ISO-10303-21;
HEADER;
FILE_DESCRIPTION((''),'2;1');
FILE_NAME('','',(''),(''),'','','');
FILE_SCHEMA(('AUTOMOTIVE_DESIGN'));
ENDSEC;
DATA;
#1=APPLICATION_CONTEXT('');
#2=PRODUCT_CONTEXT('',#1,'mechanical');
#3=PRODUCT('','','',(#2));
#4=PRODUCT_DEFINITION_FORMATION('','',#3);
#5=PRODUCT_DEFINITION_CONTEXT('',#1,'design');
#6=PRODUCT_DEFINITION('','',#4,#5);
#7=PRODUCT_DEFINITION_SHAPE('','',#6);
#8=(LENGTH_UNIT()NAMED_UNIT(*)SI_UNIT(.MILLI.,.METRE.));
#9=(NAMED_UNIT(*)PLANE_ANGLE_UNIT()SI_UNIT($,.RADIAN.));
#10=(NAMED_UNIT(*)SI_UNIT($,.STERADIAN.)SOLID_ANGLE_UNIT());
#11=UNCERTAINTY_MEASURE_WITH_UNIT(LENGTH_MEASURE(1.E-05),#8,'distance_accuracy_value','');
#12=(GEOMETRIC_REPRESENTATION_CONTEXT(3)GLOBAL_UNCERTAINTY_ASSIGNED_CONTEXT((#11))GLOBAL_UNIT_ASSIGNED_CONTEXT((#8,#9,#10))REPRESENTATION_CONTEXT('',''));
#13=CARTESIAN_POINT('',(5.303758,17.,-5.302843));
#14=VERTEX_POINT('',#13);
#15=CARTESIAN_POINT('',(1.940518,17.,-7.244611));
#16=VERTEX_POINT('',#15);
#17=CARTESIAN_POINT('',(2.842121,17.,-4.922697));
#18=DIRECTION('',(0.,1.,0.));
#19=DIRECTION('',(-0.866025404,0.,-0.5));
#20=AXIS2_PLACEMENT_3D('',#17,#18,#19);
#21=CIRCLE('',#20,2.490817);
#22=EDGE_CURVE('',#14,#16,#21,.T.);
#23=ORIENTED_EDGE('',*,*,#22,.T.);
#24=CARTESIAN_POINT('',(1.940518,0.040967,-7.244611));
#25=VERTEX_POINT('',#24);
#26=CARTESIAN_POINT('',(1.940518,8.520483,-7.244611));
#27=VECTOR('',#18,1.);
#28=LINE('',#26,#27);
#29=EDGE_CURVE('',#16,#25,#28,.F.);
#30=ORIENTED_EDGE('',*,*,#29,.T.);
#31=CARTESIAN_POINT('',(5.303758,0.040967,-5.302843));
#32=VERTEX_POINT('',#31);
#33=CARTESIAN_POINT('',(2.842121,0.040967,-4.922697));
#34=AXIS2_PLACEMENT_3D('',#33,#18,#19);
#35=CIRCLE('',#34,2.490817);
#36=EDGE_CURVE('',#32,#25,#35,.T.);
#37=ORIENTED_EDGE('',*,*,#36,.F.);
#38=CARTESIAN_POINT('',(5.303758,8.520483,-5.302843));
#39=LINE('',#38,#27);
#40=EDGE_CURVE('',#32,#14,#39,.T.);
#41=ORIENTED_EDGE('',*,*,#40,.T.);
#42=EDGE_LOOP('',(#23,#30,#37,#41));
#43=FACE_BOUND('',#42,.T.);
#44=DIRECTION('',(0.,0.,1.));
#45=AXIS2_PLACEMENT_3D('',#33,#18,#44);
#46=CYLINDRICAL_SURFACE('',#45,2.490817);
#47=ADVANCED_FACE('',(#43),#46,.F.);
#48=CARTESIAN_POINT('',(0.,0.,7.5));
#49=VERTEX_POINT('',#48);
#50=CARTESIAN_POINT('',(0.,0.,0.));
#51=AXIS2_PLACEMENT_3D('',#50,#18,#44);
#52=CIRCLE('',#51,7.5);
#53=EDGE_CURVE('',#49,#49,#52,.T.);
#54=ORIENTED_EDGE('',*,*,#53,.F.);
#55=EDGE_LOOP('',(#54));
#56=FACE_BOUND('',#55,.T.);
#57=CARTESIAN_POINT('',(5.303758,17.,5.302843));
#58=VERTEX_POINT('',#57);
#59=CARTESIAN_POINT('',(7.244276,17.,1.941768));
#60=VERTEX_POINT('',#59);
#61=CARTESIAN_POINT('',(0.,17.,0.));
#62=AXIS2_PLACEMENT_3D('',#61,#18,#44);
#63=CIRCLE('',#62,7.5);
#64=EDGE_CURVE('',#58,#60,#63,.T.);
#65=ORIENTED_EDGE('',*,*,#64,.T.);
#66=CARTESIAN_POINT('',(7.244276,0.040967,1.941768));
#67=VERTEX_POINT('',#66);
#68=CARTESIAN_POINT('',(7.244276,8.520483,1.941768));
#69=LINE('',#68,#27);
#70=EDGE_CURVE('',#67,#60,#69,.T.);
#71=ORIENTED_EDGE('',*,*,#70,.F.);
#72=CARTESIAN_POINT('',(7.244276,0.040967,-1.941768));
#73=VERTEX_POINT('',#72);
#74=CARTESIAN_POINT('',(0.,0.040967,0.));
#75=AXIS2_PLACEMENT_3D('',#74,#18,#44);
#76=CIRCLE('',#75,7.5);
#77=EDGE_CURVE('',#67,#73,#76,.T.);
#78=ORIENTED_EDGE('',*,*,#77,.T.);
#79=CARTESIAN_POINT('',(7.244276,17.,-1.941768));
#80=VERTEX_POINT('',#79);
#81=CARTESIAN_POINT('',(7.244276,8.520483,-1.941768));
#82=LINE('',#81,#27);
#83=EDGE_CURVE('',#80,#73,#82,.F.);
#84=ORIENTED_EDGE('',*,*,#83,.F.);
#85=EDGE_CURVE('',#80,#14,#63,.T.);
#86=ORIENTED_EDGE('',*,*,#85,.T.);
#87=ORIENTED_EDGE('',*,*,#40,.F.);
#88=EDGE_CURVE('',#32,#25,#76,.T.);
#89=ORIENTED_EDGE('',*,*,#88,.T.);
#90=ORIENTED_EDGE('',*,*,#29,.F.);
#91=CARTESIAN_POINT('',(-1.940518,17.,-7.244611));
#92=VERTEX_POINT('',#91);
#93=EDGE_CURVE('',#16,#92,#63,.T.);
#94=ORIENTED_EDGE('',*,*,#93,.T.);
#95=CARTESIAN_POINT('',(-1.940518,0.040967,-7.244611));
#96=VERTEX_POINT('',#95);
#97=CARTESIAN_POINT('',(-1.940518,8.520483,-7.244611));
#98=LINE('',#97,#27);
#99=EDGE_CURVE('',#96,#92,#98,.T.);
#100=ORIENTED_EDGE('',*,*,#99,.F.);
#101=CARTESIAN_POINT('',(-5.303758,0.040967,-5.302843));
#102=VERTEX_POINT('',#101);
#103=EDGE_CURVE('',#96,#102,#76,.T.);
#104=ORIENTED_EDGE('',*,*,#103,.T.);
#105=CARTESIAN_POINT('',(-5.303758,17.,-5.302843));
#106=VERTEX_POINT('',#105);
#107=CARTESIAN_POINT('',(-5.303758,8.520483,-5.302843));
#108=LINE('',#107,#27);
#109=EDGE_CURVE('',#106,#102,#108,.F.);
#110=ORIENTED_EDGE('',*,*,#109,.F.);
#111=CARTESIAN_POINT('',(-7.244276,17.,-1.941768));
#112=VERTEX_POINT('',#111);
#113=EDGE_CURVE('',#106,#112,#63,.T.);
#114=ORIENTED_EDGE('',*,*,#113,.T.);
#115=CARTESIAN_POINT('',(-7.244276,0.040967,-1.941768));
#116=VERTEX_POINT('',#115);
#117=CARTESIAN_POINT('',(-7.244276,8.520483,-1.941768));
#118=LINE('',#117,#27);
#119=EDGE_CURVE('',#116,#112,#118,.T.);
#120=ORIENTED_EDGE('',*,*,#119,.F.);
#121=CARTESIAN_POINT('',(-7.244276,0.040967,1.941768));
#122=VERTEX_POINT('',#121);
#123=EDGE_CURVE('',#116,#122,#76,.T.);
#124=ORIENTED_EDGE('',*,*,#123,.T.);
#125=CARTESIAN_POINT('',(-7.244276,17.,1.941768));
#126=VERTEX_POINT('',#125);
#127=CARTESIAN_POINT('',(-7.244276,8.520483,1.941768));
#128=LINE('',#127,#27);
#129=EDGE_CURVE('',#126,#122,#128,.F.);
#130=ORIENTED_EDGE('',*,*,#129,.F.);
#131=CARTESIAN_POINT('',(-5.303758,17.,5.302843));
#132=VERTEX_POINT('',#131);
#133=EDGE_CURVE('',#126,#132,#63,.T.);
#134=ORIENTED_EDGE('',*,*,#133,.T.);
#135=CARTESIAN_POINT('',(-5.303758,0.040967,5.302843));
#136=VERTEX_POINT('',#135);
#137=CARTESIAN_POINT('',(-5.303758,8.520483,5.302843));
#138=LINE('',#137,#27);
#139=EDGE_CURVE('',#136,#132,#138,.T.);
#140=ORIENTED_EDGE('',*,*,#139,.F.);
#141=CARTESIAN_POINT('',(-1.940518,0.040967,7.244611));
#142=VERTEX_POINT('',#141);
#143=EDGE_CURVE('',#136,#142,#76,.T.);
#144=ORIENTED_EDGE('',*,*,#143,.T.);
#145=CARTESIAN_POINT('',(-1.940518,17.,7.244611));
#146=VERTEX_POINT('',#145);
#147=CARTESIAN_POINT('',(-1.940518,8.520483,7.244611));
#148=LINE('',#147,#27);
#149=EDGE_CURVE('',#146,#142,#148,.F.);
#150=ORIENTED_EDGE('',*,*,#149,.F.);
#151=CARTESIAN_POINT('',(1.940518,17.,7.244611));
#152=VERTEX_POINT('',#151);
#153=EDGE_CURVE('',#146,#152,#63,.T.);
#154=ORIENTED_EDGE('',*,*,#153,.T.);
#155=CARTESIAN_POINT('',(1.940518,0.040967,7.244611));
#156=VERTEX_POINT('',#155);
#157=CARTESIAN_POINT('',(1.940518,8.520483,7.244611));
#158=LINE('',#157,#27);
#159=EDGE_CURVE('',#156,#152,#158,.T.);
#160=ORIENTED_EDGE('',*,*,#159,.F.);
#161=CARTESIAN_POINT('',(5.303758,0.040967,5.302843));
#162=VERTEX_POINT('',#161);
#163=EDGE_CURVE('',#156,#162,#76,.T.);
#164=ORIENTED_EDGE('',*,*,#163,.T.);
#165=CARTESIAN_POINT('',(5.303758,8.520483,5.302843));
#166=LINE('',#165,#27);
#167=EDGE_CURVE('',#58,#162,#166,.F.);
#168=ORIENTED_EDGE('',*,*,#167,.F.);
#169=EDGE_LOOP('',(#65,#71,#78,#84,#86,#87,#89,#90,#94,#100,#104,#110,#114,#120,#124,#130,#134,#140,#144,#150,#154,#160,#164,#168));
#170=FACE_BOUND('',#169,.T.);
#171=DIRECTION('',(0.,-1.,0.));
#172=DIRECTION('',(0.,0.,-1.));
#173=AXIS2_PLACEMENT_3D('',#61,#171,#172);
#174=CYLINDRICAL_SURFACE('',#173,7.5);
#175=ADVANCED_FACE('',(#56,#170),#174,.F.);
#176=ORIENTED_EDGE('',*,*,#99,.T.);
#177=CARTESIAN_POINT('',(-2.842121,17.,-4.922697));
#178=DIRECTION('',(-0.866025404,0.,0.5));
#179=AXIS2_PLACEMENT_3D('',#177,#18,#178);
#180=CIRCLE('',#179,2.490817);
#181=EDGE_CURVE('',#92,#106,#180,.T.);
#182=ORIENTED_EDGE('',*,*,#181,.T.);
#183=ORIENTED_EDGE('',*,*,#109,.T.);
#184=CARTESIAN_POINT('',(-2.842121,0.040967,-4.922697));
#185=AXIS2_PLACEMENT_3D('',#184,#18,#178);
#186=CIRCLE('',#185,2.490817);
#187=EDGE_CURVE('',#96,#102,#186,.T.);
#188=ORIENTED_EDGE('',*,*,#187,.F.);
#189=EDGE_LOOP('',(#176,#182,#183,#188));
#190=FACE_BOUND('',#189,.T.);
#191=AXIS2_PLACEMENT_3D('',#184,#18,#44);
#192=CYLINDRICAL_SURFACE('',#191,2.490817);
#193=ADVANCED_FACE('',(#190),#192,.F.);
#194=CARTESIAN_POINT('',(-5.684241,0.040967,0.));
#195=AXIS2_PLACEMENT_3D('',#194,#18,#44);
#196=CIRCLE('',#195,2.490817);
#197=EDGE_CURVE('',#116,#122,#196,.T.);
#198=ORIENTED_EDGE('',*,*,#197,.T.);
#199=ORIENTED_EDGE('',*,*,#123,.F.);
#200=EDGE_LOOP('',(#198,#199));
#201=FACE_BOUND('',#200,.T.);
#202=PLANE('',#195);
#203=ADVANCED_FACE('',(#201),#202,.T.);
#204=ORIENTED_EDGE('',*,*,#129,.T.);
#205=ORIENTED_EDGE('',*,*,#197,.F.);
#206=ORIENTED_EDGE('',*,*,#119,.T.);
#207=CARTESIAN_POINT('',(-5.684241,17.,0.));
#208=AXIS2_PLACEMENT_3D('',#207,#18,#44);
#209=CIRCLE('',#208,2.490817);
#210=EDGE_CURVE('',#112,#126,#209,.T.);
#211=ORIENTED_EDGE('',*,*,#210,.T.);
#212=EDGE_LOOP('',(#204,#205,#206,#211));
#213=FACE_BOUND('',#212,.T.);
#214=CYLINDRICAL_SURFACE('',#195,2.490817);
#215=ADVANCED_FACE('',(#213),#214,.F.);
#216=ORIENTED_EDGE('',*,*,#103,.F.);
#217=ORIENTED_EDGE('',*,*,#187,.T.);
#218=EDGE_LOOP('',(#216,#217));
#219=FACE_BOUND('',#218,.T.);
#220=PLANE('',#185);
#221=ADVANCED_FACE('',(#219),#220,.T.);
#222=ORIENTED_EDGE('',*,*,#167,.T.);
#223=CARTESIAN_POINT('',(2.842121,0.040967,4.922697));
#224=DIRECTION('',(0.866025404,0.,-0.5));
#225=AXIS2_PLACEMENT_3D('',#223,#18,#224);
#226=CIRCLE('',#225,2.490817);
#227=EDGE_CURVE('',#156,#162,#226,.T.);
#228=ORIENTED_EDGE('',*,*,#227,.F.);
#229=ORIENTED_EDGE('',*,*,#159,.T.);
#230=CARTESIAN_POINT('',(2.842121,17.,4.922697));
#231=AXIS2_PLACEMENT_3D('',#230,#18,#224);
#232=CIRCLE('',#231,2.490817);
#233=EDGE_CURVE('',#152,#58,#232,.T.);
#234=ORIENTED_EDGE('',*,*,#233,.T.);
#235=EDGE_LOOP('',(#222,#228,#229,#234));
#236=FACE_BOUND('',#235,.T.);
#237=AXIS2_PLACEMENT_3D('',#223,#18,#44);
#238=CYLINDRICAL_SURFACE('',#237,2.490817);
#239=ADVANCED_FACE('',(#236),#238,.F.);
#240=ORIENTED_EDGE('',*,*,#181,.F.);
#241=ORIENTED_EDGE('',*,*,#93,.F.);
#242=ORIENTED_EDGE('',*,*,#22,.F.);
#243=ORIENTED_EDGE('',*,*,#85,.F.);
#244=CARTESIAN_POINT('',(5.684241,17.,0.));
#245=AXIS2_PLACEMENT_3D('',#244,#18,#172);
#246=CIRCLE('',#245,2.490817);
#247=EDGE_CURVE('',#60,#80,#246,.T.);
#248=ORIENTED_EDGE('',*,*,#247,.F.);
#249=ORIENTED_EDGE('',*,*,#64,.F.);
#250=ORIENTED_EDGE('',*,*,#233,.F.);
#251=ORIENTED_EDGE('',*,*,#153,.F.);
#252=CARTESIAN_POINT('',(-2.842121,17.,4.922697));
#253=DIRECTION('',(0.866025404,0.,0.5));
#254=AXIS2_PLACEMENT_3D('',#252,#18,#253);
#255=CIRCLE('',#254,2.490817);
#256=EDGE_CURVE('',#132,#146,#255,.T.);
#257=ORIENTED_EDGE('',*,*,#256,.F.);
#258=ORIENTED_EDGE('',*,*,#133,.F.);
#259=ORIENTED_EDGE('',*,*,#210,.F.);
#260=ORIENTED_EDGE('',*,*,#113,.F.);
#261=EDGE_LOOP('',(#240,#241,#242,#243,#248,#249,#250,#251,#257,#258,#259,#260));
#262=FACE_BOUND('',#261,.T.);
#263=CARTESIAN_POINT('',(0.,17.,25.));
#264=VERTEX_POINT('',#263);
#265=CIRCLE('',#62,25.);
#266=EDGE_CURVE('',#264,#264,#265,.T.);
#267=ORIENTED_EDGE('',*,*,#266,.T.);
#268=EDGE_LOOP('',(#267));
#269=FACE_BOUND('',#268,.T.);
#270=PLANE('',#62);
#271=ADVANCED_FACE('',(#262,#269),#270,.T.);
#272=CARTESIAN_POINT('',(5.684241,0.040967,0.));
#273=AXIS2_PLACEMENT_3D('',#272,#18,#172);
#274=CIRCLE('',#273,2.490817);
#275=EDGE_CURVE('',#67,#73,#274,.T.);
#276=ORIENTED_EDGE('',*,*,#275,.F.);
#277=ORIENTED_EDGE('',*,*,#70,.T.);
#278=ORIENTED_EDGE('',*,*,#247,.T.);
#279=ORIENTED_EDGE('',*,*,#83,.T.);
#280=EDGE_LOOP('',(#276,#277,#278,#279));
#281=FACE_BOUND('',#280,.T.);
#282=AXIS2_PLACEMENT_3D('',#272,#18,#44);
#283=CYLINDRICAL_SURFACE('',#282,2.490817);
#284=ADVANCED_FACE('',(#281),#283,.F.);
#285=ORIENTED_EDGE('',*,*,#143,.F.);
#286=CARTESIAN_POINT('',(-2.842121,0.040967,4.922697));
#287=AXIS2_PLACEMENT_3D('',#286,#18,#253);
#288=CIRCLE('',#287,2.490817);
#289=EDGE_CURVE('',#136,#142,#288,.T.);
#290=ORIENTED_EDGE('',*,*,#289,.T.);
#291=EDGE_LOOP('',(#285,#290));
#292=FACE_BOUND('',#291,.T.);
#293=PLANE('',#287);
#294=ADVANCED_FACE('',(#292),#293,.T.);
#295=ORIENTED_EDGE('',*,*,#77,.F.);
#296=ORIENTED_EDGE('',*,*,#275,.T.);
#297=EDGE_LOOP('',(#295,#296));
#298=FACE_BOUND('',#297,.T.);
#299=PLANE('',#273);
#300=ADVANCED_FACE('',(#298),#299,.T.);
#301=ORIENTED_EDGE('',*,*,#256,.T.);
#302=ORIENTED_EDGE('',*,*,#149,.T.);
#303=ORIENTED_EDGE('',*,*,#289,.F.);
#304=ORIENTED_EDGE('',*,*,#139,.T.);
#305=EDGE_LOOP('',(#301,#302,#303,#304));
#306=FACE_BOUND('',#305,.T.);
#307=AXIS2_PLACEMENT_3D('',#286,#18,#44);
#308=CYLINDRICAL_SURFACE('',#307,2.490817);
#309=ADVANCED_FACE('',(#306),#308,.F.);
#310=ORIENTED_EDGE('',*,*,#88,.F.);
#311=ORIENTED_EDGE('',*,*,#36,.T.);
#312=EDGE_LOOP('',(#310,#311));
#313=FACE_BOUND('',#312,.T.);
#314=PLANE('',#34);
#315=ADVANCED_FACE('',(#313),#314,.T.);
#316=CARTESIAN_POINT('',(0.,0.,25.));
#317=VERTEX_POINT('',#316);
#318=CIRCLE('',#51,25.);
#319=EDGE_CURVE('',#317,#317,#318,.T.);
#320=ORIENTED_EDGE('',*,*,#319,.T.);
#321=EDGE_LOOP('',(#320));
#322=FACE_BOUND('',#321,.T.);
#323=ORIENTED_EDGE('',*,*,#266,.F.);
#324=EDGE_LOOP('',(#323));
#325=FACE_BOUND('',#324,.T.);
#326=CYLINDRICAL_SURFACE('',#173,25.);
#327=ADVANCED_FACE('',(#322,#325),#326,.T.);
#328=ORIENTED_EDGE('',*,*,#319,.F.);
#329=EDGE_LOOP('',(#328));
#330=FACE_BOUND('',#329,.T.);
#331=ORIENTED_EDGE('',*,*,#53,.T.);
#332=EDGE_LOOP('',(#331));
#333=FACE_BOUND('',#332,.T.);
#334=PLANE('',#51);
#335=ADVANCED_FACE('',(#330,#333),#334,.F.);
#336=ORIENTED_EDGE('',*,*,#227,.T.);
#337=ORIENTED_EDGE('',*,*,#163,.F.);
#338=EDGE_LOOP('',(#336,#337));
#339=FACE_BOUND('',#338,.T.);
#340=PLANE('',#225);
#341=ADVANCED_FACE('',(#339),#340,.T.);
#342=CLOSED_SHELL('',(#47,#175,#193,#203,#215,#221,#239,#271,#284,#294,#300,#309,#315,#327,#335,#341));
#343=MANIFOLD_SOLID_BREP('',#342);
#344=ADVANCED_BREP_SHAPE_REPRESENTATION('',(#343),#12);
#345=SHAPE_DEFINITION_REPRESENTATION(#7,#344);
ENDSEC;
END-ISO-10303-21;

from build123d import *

# Parameters (mm, degrees)
SKETCH1_R           = 25
BOSS_EXTRUDE1_DEPTH = 17
SKETCH2_R           = 7.5
CUT_EXTRUDE1_DEPTH  = 40.230090492
SKETCH3_R           = 2.490817459
CUT_EXTRUDE2_DEPTH  = 16.959033499
CIRPATTERN1_COUNT   = 6


with BuildPart() as part:
    # Sketch1 → Boss-Extrude1 (new body)
    with BuildSketch(Plane(origin=(0, 0, 0), x_dir=(1, 0, 0), z_dir=(0, 1, 0))):
        Circle(SKETCH1_R)
    extrude(amount=BOSS_EXTRUDE1_DEPTH)

    # Sketch2 → Cut-Extrude1 (cut, through all)
    with BuildSketch(Plane(origin=(0, 0, 0), x_dir=(1, 0, 0), z_dir=(0, 1, 0))):
        Circle(SKETCH2_R)
    extrude(amount=CUT_EXTRUDE1_DEPTH, mode=Mode.SUBTRACT)

    # Sketch3 → Cut-Extrude2 (cut)
    with BuildSketch(Plane(origin=(0, 17, 0), x_dir=(1, 0, 0), z_dir=(0, 1, 0))):
        with Locations((-5.684241055, 0)):
            Circle(SKETCH3_R)
    cut_extrude2 = extrude(amount=-CUT_EXTRUDE2_DEPTH, mode=Mode.SUBTRACT)

    # CirPattern1: Cut-Extrude2 ×6 about axis
    cirpattern1_axis = Axis((0, 0, 0), (0, 1, 0))
    for i in range(1, CIRPATTERN1_COUNT):
        add(cut_extrude2.rotate(cirpattern1_axis, i * 360 / CIRPATTERN1_COUNT), mode=Mode.SUBTRACT)


solid = part.part
